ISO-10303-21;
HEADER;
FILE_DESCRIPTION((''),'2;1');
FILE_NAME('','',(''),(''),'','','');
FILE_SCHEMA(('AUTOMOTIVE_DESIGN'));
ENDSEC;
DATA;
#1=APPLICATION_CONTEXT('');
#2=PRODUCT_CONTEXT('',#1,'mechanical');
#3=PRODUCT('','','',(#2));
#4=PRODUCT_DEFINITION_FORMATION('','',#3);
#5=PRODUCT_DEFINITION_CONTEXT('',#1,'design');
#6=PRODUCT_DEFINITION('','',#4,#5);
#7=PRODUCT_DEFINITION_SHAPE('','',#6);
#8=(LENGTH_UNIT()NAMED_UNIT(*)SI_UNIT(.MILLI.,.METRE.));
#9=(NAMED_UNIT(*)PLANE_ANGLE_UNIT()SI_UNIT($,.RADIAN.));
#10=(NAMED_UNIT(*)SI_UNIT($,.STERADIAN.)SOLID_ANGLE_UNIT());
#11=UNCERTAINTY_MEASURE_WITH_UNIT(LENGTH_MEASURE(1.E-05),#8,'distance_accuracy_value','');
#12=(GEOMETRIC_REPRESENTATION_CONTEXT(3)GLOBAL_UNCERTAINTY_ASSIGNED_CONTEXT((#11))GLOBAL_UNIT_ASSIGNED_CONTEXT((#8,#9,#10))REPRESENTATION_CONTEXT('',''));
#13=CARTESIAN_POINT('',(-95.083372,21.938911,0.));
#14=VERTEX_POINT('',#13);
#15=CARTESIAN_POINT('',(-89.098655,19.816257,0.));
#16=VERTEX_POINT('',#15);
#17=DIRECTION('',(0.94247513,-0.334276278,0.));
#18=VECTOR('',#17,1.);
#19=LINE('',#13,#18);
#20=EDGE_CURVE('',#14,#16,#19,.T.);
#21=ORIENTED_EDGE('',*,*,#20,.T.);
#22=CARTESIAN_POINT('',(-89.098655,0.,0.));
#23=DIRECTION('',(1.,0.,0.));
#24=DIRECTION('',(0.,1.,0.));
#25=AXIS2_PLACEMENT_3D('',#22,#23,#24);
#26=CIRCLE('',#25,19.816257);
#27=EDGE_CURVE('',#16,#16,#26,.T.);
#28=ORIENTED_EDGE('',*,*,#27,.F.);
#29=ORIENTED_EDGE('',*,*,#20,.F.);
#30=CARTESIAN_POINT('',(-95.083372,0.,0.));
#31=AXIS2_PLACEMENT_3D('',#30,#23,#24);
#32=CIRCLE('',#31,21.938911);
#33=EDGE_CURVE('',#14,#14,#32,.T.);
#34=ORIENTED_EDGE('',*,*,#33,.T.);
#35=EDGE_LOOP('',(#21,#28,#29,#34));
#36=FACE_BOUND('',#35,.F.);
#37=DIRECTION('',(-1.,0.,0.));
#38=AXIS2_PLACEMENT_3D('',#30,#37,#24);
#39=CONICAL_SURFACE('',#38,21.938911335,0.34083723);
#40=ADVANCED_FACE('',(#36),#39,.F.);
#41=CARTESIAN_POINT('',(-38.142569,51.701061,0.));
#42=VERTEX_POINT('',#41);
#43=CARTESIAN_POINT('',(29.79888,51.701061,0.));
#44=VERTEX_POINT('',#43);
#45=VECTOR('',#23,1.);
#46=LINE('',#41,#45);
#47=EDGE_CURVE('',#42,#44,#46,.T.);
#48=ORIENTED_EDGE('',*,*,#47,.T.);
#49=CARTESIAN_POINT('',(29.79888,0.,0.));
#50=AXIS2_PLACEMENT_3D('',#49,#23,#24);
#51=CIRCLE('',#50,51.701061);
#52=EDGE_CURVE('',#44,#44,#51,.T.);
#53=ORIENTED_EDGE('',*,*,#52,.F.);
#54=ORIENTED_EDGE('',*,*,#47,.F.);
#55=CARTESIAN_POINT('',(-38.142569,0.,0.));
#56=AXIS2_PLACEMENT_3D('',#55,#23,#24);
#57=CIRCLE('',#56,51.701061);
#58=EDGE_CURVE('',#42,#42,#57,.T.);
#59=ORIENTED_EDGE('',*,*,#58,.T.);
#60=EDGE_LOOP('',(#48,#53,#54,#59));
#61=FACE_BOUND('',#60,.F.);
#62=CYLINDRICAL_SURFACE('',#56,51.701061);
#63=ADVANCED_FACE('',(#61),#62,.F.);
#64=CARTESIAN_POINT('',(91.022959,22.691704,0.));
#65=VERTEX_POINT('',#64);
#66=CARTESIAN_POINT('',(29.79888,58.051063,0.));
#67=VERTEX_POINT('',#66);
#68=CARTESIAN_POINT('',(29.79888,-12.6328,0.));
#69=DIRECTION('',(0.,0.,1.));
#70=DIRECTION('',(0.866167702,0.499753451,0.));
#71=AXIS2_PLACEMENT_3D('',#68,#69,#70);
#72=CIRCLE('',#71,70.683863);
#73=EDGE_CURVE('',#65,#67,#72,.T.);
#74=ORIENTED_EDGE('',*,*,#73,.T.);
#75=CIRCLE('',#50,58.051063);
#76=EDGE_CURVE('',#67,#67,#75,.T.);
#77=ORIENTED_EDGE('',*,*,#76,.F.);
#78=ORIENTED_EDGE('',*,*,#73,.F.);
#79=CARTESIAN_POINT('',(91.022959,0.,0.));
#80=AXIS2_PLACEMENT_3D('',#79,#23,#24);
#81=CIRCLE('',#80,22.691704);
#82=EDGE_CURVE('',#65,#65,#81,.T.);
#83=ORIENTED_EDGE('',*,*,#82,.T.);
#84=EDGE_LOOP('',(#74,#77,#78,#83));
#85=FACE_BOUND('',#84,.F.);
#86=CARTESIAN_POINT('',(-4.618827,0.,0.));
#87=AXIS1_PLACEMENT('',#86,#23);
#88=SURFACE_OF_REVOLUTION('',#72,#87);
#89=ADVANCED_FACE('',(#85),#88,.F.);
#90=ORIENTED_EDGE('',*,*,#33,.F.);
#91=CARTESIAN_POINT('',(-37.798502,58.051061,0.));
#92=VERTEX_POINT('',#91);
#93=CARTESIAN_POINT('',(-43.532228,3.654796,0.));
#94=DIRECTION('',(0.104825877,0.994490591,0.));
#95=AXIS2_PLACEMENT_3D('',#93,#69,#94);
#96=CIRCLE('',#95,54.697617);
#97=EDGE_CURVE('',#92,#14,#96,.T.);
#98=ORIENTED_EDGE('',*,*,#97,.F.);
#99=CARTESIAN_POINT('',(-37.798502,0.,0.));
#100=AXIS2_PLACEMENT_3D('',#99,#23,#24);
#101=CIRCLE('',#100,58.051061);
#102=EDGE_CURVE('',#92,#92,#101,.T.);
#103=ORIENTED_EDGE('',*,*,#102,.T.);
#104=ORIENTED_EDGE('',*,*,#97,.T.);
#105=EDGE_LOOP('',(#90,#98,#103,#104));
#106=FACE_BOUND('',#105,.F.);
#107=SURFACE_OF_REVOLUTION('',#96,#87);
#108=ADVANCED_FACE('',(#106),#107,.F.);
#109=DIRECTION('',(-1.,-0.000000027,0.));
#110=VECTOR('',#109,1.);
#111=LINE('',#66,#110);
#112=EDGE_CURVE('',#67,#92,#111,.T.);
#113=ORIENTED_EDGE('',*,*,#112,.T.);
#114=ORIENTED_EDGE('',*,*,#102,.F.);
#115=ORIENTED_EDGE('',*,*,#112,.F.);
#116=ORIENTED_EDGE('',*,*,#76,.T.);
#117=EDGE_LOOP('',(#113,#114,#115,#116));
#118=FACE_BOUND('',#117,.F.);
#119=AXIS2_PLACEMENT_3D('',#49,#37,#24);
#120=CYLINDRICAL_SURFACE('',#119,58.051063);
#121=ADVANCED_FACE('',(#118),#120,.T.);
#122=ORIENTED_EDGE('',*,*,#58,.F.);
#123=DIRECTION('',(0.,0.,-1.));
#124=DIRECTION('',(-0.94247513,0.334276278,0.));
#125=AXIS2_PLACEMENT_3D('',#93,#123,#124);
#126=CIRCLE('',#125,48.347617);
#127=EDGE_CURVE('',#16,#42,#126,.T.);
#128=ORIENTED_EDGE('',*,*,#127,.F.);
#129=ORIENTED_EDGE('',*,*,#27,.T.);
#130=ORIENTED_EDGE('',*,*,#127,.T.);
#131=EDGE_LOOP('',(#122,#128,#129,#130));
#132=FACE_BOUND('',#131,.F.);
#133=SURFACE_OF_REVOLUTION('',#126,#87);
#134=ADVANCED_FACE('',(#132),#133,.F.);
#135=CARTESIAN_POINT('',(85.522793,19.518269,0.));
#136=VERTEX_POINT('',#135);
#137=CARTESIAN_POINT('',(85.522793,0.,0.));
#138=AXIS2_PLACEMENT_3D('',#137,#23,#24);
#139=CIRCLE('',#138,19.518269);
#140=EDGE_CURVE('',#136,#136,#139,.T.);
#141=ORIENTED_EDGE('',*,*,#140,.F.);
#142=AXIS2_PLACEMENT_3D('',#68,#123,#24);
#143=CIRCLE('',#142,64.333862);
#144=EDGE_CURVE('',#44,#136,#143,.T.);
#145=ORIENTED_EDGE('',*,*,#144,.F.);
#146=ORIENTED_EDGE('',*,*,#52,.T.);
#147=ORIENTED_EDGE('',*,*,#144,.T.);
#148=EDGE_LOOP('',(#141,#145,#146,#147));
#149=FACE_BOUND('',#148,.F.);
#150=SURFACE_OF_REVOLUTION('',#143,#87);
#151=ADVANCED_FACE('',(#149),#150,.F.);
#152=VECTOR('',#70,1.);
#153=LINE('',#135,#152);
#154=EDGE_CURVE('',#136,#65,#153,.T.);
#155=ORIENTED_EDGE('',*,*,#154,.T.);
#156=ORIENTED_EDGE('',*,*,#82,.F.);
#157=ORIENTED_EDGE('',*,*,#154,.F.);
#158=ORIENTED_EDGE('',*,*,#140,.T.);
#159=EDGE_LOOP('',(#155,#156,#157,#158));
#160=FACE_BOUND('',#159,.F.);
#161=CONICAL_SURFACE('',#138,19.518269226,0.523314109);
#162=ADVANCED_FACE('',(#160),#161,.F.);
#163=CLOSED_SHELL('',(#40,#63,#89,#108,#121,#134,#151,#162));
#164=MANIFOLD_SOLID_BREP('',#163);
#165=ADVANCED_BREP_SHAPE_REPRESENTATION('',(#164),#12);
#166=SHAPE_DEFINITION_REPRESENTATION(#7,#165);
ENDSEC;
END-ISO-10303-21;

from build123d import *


# Not quite as in the source:
# - ends of sketch curves that miss each other by under 0.0002 mm in the source are joined


with BuildPart() as f1:
    # F0 (on Top) → F1 (revolve)
    with BuildSketch(Plane.XY):
        with BuildLine():
            ThreePointArc((-89.0986546874, 19.8162570596), (-69.1779558985, 44.6400212025), (-38.1425693631, 51.7010614276))
            Line((-38.1425693631, 51.7010614276), (29.7988802195, 51.7010614276))
            ThreePointArc((29.7988802195, 51.7010614276), (61.97374073, 43.0773793158), (85.5227932334, 19.518269226))
            Line((85.5227932334, 19.518269226), (91.022959273, 22.6917042953))
            ThreePointArc((91.022959273, 22.6917042953), (65.1495240793, 48.5761897981), (29.7988802195, 58.0510627349))
            Line((29.7988802195, 58.0510627349), (-37.7985022652, 58.0510608852))
            ThreePointArc((-37.7985022652, 58.0510608852), (-72.7012317245, 49.9257206617), (-95.0833715048, 21.9389113347))
            Line((-95.0833715048, 21.9389113347), (-89.0986546874, 19.8162570596))
        make_face()
    revolve(axis=Axis((-4.6188272536, 0, 0), (1, 0, 0)))


solid = f1.part
